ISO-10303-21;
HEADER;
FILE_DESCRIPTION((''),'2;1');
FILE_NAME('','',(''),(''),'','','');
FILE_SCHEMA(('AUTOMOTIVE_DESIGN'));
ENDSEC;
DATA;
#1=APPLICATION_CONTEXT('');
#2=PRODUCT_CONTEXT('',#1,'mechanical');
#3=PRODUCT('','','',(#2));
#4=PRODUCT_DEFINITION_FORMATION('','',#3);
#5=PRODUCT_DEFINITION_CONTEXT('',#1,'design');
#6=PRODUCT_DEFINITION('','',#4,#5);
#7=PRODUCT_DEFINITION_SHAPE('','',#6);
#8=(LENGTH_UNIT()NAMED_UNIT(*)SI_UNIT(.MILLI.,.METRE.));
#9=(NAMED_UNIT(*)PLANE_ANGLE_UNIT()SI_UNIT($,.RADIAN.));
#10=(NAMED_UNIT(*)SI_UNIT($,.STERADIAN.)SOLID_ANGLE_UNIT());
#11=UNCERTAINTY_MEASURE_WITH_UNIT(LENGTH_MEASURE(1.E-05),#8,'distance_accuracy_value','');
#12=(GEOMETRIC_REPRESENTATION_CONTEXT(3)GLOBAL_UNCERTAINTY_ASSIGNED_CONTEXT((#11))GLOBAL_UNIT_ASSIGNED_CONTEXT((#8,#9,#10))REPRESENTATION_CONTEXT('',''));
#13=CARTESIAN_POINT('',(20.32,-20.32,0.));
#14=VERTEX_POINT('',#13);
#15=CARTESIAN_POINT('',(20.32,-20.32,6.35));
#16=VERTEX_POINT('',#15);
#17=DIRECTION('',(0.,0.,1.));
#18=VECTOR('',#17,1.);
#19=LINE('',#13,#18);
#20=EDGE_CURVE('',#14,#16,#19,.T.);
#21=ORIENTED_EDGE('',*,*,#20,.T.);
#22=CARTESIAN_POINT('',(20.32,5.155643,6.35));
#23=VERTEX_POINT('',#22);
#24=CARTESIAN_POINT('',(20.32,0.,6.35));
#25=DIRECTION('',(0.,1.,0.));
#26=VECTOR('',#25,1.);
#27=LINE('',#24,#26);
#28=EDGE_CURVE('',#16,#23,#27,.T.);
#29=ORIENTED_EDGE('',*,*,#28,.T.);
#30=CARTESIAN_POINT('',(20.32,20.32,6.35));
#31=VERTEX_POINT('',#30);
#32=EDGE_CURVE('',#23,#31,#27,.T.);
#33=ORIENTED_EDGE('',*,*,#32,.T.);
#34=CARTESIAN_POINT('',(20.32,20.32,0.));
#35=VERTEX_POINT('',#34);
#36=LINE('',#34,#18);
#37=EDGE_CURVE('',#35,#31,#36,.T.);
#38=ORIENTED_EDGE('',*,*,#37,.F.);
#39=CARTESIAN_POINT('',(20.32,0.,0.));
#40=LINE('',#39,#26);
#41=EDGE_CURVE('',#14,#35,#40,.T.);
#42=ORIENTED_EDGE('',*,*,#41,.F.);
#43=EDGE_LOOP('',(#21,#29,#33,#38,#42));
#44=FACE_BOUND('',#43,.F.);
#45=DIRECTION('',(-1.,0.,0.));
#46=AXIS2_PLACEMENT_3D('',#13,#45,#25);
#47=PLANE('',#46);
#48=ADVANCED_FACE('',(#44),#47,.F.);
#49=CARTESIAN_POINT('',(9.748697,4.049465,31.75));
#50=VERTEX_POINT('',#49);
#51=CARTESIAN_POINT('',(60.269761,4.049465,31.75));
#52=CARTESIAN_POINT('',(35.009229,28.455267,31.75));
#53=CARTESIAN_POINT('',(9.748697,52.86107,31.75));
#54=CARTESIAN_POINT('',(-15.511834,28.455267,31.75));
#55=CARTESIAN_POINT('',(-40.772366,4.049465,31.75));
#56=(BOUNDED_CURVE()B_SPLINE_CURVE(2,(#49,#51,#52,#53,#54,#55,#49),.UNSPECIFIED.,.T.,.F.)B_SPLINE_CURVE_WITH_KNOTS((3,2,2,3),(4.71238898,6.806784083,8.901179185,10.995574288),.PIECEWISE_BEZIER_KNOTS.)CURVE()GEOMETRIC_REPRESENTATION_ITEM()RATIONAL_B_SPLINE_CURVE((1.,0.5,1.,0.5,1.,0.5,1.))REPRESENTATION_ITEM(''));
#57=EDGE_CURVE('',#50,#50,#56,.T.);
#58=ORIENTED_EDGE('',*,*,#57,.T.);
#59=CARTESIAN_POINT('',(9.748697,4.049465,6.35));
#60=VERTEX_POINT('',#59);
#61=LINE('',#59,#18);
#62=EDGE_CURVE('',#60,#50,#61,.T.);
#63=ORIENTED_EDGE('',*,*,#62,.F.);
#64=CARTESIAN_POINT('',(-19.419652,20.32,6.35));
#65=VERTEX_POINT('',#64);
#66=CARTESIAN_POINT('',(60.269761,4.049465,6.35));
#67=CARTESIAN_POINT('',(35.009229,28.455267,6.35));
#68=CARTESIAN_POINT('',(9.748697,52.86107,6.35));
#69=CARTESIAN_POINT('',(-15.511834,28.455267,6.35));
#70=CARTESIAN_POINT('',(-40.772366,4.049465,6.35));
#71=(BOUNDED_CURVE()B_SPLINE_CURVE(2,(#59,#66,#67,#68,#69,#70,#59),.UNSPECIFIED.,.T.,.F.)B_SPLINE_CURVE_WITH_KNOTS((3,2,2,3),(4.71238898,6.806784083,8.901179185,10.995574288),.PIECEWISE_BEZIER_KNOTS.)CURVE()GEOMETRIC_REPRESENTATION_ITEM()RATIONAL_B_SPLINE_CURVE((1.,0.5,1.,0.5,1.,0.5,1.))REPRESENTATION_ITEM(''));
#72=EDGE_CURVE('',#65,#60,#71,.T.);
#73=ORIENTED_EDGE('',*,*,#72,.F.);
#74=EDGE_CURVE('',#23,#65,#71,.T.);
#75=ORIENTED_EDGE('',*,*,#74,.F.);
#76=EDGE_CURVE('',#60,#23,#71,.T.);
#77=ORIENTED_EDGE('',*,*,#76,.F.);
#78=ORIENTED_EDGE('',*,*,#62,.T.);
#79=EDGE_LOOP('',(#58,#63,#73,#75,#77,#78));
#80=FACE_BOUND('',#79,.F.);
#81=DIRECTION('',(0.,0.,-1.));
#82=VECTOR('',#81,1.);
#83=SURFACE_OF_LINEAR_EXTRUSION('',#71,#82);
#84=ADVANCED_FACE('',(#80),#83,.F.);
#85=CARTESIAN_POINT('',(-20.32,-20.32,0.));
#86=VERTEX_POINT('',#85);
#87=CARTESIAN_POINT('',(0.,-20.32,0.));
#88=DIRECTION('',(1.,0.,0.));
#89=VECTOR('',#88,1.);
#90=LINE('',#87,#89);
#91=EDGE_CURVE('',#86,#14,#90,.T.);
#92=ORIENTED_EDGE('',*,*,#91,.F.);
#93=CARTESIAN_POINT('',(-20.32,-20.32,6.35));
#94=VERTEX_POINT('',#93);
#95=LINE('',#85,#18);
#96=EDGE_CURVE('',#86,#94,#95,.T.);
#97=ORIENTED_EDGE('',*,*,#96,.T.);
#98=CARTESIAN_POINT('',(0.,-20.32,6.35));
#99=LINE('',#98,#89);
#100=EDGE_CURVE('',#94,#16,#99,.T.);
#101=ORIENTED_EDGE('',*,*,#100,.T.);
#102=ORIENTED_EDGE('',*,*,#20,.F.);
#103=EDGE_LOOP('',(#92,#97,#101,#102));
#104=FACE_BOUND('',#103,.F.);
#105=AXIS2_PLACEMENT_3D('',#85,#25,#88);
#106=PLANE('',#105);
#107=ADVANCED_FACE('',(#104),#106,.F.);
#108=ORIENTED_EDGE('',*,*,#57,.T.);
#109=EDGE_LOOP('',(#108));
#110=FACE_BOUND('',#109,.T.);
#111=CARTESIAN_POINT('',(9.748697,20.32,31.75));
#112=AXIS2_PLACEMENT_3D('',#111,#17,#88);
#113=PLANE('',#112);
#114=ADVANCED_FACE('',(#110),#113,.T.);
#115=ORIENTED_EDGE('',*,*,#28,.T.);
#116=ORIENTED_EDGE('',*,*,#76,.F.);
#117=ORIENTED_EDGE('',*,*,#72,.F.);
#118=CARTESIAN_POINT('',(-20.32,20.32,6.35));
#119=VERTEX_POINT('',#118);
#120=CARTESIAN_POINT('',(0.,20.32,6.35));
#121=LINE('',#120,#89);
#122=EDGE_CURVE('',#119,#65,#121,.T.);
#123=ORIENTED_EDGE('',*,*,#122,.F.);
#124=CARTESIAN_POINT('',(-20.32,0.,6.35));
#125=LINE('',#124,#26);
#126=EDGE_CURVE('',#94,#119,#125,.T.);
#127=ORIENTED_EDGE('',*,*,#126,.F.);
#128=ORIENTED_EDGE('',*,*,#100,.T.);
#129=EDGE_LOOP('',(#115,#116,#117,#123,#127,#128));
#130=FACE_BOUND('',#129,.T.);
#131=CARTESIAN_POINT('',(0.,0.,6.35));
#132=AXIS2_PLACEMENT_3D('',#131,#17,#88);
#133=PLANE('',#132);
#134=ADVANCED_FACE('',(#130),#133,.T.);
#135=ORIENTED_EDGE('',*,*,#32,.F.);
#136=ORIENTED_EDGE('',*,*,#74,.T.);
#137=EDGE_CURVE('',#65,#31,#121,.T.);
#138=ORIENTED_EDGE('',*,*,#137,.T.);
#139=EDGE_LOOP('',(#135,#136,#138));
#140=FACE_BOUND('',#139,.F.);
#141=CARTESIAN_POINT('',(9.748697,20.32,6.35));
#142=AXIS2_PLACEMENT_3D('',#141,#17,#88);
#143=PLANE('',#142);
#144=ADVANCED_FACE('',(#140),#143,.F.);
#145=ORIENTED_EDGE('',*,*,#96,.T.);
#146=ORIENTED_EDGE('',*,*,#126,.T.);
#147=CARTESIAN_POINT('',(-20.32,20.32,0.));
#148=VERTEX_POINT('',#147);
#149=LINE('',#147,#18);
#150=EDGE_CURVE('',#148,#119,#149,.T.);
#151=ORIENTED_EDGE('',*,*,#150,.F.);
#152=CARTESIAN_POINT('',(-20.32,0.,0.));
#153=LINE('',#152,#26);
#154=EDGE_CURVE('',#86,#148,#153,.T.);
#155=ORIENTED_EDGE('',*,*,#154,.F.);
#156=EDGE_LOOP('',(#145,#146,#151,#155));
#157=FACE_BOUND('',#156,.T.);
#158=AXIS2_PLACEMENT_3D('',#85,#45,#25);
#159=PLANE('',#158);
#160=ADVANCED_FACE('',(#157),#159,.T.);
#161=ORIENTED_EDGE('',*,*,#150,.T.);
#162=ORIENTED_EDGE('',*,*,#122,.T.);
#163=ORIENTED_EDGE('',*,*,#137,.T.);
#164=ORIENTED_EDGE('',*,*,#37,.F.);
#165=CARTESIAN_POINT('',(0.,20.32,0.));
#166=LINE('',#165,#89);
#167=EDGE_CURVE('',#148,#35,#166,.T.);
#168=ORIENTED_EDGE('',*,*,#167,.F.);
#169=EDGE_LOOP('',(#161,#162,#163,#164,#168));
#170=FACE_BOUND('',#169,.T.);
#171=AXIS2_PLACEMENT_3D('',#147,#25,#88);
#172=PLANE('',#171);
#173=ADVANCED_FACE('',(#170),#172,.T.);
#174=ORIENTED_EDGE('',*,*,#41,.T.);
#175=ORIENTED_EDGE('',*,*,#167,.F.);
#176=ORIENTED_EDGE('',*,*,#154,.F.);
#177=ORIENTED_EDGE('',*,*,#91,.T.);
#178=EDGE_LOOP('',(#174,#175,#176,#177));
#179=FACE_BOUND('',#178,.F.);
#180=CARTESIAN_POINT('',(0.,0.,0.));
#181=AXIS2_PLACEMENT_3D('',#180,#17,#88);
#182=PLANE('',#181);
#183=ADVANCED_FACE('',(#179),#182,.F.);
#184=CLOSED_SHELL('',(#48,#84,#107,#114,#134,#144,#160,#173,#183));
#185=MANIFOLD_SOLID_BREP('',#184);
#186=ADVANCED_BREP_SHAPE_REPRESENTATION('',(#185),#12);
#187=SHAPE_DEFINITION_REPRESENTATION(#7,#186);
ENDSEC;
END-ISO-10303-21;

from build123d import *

# Parameters (mm, degrees)
F0_W     = 40.64
F0_H     = 40.64
F1_DEPTH = 6.35
F2_W     = 35.56
F2_H     = 35.56
F3_DEPTH = 1.27
F5_DEPTH = 25.4


# Not quite as in the source:
# - a feature names something its author has since deleted; it is built from what else it names


with BuildPart() as f1:
    # F0 (on Top) → F1 (new body)
    with BuildSketch(Plane.XY):
        Rectangle(F0_W, F0_H)
    extrude(amount=F1_DEPTH)

    # F2 (on Top) → F3 (join)
    with BuildSketch(Plane.XY):
        Rectangle(F2_W, F2_H)
    extrude(amount=F3_DEPTH)

    # F4 (on face) → F5 (join)
    with BuildSketch(Plane.XY.offset(6.35)):
        with BuildLine():
            add(Edge.make_bspline(
                [(9.7486972809, 4.0494650602), (60.2697605827, 4.0494650602), (35.0092289318, 28.4552674699), (9.7486972809, 52.8610698795), (-15.51183437, 28.4552674699), (-40.7723660209, 4.0494650602), (9.7486972809, 4.0494650602)],
                knots=[4.7123889804, 4.7123889804, 4.7123889804, 6.8067840828, 6.8067840828, 8.9011791852, 8.9011791852, 10.9955742876, 10.9955742876, 10.9955742876], degree=2, weights=[1, 0.5, 1, 0.5, 1, 0.5, 1]))
        make_face()
    extrude(amount=F5_DEPTH)


solid = f1.part
